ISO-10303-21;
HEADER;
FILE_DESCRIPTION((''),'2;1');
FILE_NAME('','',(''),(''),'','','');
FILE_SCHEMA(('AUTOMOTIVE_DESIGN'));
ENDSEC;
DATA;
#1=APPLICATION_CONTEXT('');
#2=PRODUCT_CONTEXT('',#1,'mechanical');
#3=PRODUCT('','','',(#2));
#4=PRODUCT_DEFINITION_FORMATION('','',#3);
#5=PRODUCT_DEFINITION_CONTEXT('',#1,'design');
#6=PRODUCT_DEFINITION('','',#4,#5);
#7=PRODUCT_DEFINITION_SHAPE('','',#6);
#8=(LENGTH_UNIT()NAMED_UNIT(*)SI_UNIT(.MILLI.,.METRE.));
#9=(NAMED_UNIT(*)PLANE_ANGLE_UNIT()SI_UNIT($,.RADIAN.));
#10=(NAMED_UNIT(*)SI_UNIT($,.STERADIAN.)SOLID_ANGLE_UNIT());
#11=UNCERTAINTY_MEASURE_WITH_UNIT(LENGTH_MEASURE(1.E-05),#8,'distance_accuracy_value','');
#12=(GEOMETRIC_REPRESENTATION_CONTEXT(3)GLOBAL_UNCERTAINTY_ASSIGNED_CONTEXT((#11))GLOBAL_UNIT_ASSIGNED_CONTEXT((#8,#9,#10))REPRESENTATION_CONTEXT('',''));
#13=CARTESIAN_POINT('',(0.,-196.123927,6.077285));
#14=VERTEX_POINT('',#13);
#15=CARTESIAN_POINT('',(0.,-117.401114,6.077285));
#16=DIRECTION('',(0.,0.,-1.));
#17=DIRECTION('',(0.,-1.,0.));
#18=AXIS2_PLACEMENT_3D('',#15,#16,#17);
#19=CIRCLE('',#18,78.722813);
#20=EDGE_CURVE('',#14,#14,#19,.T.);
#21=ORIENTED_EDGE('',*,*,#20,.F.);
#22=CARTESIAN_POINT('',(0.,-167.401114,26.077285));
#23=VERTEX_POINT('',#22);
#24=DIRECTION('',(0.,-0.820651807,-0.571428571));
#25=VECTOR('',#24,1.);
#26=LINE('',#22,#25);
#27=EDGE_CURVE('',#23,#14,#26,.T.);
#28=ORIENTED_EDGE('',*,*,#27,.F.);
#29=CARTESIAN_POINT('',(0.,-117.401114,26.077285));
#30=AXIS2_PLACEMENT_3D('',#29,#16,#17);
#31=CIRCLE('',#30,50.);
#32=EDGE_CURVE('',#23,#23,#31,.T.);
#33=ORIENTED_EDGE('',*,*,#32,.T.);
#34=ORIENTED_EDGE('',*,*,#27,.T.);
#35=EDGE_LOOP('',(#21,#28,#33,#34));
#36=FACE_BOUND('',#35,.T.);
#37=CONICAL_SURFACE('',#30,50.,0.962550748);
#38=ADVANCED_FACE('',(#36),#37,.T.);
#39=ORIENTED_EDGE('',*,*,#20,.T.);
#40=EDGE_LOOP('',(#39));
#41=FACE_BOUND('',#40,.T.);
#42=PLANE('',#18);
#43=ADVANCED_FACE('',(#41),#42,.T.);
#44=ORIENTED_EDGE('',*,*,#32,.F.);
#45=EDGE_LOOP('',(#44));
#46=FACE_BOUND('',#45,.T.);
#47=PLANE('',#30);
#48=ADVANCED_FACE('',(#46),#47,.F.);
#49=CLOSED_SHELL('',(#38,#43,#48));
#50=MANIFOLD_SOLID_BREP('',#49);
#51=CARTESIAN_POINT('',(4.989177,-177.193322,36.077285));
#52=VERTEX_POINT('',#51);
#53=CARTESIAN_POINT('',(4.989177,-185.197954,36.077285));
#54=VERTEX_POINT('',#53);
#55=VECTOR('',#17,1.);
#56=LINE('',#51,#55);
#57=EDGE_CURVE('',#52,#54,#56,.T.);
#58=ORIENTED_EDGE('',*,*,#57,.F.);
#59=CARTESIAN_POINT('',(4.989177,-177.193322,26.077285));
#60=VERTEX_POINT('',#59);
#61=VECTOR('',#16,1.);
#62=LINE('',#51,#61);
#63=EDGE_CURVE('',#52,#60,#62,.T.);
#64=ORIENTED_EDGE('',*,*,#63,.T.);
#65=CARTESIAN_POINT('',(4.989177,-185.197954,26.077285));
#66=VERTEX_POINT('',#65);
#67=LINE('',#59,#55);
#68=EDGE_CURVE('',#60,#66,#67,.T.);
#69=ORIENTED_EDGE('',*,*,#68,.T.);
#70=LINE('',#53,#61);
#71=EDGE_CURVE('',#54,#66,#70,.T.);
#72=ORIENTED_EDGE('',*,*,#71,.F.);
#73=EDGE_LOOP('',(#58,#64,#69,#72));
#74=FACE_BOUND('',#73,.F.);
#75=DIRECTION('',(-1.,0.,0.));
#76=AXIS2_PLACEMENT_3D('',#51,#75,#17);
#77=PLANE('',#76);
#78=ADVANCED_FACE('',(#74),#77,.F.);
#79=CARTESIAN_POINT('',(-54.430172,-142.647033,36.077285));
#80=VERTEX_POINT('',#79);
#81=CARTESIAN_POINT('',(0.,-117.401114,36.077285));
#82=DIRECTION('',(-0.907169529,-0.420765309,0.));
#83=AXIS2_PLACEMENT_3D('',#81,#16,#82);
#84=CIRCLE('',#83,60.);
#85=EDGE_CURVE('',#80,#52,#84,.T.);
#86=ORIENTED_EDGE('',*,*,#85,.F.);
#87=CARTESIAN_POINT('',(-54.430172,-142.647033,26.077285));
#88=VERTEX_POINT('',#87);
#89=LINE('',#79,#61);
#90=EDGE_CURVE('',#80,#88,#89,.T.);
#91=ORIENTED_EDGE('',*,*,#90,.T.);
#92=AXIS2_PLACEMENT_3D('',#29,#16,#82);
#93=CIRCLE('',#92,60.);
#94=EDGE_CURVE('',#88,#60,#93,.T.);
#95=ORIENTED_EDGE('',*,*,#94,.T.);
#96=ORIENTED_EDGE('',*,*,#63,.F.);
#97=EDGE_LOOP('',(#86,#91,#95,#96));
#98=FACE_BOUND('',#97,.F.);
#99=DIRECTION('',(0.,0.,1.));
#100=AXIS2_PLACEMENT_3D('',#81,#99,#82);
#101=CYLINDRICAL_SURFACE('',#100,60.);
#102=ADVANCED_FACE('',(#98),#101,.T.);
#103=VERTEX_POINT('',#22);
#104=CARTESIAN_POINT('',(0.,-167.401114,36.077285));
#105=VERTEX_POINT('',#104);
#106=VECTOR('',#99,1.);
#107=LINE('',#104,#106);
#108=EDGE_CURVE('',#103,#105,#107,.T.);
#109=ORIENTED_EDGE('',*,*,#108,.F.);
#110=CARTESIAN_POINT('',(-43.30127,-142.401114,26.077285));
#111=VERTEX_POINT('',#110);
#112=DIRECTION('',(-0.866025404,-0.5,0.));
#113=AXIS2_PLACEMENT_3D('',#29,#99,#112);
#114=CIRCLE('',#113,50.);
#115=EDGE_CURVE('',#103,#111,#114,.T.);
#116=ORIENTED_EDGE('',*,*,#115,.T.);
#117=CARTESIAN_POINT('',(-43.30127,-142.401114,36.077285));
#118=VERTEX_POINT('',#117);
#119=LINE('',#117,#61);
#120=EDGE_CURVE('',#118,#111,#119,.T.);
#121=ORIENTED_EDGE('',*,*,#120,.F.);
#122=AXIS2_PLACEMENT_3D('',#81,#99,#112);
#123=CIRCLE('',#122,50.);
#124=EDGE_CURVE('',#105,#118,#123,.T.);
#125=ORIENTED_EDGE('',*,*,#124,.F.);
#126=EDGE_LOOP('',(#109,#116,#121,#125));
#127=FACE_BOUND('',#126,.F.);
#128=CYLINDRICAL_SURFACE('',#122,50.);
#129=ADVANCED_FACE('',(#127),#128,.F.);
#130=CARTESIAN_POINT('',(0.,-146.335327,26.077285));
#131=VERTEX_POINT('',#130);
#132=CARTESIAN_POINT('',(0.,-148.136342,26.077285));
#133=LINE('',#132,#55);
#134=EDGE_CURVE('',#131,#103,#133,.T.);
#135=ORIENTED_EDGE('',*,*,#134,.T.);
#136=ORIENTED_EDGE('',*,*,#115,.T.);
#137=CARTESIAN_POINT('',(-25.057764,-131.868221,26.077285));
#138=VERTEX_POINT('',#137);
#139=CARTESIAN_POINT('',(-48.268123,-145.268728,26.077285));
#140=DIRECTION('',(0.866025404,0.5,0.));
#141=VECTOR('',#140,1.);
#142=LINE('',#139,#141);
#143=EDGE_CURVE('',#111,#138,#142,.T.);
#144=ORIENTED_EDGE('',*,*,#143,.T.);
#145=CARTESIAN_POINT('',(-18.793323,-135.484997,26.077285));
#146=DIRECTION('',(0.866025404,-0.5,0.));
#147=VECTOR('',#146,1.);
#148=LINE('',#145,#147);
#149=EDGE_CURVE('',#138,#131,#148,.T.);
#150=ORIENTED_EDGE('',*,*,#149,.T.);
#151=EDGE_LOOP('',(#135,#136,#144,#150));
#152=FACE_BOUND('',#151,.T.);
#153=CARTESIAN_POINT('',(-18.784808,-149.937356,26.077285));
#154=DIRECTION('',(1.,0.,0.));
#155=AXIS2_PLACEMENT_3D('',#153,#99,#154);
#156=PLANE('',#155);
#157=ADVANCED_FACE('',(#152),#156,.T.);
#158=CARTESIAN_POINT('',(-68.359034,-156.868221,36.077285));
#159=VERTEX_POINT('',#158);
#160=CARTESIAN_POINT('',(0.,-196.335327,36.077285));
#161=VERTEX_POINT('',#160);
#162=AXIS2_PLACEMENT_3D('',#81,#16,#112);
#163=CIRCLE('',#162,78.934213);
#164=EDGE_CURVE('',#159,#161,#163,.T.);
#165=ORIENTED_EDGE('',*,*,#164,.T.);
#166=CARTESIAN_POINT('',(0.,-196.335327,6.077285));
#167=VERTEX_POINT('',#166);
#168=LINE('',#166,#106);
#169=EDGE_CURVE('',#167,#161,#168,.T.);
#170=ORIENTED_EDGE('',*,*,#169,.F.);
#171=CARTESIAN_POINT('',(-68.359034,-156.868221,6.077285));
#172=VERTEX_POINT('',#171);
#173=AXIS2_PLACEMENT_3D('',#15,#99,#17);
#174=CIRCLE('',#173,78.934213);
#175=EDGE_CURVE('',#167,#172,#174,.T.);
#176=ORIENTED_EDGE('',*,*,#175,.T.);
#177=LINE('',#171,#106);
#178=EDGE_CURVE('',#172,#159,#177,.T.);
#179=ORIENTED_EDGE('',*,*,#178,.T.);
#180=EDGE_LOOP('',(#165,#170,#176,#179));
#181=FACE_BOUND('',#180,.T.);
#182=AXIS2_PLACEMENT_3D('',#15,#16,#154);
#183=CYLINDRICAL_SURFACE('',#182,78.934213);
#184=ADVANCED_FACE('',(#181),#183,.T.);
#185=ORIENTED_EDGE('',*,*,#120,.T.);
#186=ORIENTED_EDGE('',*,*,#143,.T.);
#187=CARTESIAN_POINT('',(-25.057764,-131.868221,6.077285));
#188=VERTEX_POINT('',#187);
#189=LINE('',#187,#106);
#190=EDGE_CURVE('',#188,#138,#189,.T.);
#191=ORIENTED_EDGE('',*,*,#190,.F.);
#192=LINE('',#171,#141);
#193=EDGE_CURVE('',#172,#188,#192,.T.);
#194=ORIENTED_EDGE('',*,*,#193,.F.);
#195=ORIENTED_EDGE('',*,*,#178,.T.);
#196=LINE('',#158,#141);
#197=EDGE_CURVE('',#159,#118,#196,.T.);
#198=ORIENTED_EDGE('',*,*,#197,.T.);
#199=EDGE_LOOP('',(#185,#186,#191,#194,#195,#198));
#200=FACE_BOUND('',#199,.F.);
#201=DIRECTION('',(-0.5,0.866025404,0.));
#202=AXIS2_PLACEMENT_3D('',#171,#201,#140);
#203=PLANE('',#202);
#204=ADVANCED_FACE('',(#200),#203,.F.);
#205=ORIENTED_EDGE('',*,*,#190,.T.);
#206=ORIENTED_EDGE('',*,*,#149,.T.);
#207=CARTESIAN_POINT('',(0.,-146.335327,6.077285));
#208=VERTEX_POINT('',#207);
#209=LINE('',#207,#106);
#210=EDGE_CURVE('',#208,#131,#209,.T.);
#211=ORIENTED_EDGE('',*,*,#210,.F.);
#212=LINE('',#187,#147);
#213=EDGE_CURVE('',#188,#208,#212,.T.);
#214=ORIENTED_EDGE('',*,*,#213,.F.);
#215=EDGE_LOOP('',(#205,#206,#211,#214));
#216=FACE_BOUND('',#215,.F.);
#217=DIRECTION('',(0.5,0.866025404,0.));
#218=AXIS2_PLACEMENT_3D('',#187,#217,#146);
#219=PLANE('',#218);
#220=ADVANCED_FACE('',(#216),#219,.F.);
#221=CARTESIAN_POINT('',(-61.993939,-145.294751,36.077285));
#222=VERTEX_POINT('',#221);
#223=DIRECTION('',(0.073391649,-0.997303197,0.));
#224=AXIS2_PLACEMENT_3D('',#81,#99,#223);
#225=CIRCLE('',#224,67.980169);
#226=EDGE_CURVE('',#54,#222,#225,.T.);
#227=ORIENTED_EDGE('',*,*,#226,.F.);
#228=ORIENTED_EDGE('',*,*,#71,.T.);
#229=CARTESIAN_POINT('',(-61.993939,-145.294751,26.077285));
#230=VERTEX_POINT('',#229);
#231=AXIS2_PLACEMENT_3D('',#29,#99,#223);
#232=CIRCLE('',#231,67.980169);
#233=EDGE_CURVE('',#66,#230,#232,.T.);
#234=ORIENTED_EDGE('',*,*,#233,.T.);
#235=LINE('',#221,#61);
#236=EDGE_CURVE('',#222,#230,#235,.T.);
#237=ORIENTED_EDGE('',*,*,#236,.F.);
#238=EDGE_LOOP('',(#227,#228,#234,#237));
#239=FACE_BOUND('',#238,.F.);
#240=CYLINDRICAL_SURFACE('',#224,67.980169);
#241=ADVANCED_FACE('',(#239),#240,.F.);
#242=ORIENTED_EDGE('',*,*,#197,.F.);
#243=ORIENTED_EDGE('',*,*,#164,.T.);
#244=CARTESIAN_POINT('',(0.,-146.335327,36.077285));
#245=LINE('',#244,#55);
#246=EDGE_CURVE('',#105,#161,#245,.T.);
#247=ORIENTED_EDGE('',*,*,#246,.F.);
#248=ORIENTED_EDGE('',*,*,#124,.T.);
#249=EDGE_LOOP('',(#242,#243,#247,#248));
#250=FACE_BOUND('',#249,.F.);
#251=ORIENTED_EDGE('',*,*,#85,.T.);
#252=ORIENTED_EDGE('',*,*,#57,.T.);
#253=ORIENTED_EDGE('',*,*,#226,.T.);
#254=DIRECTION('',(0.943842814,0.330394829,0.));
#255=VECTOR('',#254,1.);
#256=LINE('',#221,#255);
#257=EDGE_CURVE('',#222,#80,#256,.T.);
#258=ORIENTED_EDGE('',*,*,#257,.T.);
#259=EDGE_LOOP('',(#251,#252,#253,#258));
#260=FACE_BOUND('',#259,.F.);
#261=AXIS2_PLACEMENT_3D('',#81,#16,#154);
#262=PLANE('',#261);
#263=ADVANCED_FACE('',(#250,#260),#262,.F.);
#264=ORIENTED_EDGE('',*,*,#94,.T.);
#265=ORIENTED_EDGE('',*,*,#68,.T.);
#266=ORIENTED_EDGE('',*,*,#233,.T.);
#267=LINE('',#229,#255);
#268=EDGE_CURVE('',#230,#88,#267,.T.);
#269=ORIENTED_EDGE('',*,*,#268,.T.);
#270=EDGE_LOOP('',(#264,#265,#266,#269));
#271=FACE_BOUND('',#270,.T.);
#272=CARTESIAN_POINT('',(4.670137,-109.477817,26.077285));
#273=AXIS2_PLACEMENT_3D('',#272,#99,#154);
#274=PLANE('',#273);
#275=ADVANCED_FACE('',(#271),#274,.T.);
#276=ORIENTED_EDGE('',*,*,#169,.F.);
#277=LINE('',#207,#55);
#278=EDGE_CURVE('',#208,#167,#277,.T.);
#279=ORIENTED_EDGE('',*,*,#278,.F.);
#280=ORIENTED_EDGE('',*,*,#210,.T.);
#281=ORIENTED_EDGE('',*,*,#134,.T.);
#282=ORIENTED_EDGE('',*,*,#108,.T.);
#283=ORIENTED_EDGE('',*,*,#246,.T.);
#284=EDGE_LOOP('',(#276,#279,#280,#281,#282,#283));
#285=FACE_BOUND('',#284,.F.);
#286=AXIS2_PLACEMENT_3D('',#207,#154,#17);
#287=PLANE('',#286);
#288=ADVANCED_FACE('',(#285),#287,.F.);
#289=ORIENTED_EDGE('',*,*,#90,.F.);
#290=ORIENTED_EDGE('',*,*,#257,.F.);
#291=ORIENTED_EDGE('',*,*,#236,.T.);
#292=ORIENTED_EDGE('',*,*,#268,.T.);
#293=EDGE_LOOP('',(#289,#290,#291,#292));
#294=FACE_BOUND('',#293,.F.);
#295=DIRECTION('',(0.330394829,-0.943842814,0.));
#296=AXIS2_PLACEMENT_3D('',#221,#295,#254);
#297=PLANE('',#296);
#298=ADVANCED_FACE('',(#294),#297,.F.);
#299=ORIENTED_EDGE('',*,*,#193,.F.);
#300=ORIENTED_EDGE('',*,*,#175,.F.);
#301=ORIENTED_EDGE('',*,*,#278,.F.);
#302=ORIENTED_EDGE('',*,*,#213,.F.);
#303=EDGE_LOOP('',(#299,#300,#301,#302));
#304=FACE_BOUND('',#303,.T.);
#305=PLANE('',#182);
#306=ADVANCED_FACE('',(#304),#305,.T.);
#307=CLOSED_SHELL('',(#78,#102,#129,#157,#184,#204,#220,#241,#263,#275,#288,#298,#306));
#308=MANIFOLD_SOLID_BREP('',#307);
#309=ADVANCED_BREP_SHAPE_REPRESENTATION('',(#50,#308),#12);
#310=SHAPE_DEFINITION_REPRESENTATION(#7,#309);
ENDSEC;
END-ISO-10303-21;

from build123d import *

# Parameters (mm, degrees)
F2_R     = 78.9342131776
F3_DEPTH = 30
F5_DEPTH = 30
F7_DEPTH = 10
F8_DEPTH = 10


with BuildPart() as f1:
    # F0 (on Right) → F1 (revolve)
    with BuildSketch(Plane.YZ):
        Polygon((-117.4011141722, 6.0772849967), (-117.4011141722, 26.0772849967), (-167.4011141722, 26.0772849967), (-196.1239274049, 6.0772849967), align=None)
    revolve(axis=Axis((0, -117.4011141722, 16.0772849967), (0, 0, -1)))


with BuildPart() as f3:
    # F2 (on face) → F3 (new body)
    with BuildSketch(Plane(origin=(0, 0, 6.0772849967), x_dir=(1, 0, 0), z_dir=(0, 0, -1))):
        with Locations((0, 117.4011141722)):
            Circle(F2_R)
    extrude(amount=-F3_DEPTH)

    # F4 (on face) → F5 (cut)
    with BuildSketch(Plane(origin=(0, 0, 6.0772849967), x_dir=(1, 0, 0), z_dir=(0, 0, -1))):
        with BuildLine():
            ThreePointArc((0, 196.3353273498), (-39.4671065888, 185.7601480117), (-68.3590338395, 156.868220761))
            Line((-68.3590338395, 156.868220761), (-25.0577636503, 131.868220761))
            Line((-25.0577636503, 131.868220761), (0, 146.3353273498))
            Line((0, 146.3353273498), (0, 196.3353273498))
        make_face()
    extrude(amount=-F5_DEPTH, mode=Mode.SUBTRACT)

    # F6 (on face) → F7 (cut)
    with BuildSketch(Plane.XY.offset(36.0772849967)):
        with BuildLine():
            ThreePointArc((4.9891766792, -185.1979539584), (49.8019499741, -163.6728025756), (67.9801689386, -117.4011141722))
            ThreePointArc((67.9801689386, -117.4011141722), (-14.2643778849, -50.9343488494), (-61.9939385535, -145.2947505711))
            Line((-61.9939385535, -145.2947505711), (-54.4301717399, -142.6470327407))
            ThreePointArc((-54.4301717399, -142.6470327407), (-12.9265172341, -58.8101152714), (60, -117.4011141722))
            ThreePointArc((60, -117.4011141722), (44.1551276793, -158.0253027749), (4.9891766792, -177.1933219928))
            Line((4.9891766792, -177.1933219928), (4.9891766792, -185.1979539584))
        make_face()
    extrude(amount=-F7_DEPTH, mode=Mode.SUBTRACT)

    # F6 (on face) → F8 (cut)
    with BuildSketch(Plane.XY.offset(36.0772849967)):
        with BuildLine():
            Line((-25.0577636503, -131.868220761), (-43.3012701892, -142.4011141722))
            ThreePointArc((-43.3012701892, -142.4011141722), (-25, -160.7023843614), (0, -167.4011141722))
            Line((0, -167.4011141722), (0, -146.3353273498))
            Line((0, -146.3353273498), (-25.0577636503, -131.868220761))
        make_face()
        with BuildLine():
            ThreePointArc((50, -117.4011141722), (-12.9409522551, -69.1048228578), (-43.3012701892, -142.4011141722))
            Line((-43.3012701892, -142.4011141722), (-25.0577636503, -131.868220761))
            Line((-25.0577636503, -131.868220761), (0, -146.3353273498))
            Line((0, -146.3353273498), (0, -167.4011141722))
            ThreePointArc((0, -167.4011141722), (35.3553390593, -152.7564532316), (50, -117.4011141722))
        make_face()
    extrude(amount=-F8_DEPTH, mode=Mode.SUBTRACT)


solid = Compound([f1.part, f3.part])
